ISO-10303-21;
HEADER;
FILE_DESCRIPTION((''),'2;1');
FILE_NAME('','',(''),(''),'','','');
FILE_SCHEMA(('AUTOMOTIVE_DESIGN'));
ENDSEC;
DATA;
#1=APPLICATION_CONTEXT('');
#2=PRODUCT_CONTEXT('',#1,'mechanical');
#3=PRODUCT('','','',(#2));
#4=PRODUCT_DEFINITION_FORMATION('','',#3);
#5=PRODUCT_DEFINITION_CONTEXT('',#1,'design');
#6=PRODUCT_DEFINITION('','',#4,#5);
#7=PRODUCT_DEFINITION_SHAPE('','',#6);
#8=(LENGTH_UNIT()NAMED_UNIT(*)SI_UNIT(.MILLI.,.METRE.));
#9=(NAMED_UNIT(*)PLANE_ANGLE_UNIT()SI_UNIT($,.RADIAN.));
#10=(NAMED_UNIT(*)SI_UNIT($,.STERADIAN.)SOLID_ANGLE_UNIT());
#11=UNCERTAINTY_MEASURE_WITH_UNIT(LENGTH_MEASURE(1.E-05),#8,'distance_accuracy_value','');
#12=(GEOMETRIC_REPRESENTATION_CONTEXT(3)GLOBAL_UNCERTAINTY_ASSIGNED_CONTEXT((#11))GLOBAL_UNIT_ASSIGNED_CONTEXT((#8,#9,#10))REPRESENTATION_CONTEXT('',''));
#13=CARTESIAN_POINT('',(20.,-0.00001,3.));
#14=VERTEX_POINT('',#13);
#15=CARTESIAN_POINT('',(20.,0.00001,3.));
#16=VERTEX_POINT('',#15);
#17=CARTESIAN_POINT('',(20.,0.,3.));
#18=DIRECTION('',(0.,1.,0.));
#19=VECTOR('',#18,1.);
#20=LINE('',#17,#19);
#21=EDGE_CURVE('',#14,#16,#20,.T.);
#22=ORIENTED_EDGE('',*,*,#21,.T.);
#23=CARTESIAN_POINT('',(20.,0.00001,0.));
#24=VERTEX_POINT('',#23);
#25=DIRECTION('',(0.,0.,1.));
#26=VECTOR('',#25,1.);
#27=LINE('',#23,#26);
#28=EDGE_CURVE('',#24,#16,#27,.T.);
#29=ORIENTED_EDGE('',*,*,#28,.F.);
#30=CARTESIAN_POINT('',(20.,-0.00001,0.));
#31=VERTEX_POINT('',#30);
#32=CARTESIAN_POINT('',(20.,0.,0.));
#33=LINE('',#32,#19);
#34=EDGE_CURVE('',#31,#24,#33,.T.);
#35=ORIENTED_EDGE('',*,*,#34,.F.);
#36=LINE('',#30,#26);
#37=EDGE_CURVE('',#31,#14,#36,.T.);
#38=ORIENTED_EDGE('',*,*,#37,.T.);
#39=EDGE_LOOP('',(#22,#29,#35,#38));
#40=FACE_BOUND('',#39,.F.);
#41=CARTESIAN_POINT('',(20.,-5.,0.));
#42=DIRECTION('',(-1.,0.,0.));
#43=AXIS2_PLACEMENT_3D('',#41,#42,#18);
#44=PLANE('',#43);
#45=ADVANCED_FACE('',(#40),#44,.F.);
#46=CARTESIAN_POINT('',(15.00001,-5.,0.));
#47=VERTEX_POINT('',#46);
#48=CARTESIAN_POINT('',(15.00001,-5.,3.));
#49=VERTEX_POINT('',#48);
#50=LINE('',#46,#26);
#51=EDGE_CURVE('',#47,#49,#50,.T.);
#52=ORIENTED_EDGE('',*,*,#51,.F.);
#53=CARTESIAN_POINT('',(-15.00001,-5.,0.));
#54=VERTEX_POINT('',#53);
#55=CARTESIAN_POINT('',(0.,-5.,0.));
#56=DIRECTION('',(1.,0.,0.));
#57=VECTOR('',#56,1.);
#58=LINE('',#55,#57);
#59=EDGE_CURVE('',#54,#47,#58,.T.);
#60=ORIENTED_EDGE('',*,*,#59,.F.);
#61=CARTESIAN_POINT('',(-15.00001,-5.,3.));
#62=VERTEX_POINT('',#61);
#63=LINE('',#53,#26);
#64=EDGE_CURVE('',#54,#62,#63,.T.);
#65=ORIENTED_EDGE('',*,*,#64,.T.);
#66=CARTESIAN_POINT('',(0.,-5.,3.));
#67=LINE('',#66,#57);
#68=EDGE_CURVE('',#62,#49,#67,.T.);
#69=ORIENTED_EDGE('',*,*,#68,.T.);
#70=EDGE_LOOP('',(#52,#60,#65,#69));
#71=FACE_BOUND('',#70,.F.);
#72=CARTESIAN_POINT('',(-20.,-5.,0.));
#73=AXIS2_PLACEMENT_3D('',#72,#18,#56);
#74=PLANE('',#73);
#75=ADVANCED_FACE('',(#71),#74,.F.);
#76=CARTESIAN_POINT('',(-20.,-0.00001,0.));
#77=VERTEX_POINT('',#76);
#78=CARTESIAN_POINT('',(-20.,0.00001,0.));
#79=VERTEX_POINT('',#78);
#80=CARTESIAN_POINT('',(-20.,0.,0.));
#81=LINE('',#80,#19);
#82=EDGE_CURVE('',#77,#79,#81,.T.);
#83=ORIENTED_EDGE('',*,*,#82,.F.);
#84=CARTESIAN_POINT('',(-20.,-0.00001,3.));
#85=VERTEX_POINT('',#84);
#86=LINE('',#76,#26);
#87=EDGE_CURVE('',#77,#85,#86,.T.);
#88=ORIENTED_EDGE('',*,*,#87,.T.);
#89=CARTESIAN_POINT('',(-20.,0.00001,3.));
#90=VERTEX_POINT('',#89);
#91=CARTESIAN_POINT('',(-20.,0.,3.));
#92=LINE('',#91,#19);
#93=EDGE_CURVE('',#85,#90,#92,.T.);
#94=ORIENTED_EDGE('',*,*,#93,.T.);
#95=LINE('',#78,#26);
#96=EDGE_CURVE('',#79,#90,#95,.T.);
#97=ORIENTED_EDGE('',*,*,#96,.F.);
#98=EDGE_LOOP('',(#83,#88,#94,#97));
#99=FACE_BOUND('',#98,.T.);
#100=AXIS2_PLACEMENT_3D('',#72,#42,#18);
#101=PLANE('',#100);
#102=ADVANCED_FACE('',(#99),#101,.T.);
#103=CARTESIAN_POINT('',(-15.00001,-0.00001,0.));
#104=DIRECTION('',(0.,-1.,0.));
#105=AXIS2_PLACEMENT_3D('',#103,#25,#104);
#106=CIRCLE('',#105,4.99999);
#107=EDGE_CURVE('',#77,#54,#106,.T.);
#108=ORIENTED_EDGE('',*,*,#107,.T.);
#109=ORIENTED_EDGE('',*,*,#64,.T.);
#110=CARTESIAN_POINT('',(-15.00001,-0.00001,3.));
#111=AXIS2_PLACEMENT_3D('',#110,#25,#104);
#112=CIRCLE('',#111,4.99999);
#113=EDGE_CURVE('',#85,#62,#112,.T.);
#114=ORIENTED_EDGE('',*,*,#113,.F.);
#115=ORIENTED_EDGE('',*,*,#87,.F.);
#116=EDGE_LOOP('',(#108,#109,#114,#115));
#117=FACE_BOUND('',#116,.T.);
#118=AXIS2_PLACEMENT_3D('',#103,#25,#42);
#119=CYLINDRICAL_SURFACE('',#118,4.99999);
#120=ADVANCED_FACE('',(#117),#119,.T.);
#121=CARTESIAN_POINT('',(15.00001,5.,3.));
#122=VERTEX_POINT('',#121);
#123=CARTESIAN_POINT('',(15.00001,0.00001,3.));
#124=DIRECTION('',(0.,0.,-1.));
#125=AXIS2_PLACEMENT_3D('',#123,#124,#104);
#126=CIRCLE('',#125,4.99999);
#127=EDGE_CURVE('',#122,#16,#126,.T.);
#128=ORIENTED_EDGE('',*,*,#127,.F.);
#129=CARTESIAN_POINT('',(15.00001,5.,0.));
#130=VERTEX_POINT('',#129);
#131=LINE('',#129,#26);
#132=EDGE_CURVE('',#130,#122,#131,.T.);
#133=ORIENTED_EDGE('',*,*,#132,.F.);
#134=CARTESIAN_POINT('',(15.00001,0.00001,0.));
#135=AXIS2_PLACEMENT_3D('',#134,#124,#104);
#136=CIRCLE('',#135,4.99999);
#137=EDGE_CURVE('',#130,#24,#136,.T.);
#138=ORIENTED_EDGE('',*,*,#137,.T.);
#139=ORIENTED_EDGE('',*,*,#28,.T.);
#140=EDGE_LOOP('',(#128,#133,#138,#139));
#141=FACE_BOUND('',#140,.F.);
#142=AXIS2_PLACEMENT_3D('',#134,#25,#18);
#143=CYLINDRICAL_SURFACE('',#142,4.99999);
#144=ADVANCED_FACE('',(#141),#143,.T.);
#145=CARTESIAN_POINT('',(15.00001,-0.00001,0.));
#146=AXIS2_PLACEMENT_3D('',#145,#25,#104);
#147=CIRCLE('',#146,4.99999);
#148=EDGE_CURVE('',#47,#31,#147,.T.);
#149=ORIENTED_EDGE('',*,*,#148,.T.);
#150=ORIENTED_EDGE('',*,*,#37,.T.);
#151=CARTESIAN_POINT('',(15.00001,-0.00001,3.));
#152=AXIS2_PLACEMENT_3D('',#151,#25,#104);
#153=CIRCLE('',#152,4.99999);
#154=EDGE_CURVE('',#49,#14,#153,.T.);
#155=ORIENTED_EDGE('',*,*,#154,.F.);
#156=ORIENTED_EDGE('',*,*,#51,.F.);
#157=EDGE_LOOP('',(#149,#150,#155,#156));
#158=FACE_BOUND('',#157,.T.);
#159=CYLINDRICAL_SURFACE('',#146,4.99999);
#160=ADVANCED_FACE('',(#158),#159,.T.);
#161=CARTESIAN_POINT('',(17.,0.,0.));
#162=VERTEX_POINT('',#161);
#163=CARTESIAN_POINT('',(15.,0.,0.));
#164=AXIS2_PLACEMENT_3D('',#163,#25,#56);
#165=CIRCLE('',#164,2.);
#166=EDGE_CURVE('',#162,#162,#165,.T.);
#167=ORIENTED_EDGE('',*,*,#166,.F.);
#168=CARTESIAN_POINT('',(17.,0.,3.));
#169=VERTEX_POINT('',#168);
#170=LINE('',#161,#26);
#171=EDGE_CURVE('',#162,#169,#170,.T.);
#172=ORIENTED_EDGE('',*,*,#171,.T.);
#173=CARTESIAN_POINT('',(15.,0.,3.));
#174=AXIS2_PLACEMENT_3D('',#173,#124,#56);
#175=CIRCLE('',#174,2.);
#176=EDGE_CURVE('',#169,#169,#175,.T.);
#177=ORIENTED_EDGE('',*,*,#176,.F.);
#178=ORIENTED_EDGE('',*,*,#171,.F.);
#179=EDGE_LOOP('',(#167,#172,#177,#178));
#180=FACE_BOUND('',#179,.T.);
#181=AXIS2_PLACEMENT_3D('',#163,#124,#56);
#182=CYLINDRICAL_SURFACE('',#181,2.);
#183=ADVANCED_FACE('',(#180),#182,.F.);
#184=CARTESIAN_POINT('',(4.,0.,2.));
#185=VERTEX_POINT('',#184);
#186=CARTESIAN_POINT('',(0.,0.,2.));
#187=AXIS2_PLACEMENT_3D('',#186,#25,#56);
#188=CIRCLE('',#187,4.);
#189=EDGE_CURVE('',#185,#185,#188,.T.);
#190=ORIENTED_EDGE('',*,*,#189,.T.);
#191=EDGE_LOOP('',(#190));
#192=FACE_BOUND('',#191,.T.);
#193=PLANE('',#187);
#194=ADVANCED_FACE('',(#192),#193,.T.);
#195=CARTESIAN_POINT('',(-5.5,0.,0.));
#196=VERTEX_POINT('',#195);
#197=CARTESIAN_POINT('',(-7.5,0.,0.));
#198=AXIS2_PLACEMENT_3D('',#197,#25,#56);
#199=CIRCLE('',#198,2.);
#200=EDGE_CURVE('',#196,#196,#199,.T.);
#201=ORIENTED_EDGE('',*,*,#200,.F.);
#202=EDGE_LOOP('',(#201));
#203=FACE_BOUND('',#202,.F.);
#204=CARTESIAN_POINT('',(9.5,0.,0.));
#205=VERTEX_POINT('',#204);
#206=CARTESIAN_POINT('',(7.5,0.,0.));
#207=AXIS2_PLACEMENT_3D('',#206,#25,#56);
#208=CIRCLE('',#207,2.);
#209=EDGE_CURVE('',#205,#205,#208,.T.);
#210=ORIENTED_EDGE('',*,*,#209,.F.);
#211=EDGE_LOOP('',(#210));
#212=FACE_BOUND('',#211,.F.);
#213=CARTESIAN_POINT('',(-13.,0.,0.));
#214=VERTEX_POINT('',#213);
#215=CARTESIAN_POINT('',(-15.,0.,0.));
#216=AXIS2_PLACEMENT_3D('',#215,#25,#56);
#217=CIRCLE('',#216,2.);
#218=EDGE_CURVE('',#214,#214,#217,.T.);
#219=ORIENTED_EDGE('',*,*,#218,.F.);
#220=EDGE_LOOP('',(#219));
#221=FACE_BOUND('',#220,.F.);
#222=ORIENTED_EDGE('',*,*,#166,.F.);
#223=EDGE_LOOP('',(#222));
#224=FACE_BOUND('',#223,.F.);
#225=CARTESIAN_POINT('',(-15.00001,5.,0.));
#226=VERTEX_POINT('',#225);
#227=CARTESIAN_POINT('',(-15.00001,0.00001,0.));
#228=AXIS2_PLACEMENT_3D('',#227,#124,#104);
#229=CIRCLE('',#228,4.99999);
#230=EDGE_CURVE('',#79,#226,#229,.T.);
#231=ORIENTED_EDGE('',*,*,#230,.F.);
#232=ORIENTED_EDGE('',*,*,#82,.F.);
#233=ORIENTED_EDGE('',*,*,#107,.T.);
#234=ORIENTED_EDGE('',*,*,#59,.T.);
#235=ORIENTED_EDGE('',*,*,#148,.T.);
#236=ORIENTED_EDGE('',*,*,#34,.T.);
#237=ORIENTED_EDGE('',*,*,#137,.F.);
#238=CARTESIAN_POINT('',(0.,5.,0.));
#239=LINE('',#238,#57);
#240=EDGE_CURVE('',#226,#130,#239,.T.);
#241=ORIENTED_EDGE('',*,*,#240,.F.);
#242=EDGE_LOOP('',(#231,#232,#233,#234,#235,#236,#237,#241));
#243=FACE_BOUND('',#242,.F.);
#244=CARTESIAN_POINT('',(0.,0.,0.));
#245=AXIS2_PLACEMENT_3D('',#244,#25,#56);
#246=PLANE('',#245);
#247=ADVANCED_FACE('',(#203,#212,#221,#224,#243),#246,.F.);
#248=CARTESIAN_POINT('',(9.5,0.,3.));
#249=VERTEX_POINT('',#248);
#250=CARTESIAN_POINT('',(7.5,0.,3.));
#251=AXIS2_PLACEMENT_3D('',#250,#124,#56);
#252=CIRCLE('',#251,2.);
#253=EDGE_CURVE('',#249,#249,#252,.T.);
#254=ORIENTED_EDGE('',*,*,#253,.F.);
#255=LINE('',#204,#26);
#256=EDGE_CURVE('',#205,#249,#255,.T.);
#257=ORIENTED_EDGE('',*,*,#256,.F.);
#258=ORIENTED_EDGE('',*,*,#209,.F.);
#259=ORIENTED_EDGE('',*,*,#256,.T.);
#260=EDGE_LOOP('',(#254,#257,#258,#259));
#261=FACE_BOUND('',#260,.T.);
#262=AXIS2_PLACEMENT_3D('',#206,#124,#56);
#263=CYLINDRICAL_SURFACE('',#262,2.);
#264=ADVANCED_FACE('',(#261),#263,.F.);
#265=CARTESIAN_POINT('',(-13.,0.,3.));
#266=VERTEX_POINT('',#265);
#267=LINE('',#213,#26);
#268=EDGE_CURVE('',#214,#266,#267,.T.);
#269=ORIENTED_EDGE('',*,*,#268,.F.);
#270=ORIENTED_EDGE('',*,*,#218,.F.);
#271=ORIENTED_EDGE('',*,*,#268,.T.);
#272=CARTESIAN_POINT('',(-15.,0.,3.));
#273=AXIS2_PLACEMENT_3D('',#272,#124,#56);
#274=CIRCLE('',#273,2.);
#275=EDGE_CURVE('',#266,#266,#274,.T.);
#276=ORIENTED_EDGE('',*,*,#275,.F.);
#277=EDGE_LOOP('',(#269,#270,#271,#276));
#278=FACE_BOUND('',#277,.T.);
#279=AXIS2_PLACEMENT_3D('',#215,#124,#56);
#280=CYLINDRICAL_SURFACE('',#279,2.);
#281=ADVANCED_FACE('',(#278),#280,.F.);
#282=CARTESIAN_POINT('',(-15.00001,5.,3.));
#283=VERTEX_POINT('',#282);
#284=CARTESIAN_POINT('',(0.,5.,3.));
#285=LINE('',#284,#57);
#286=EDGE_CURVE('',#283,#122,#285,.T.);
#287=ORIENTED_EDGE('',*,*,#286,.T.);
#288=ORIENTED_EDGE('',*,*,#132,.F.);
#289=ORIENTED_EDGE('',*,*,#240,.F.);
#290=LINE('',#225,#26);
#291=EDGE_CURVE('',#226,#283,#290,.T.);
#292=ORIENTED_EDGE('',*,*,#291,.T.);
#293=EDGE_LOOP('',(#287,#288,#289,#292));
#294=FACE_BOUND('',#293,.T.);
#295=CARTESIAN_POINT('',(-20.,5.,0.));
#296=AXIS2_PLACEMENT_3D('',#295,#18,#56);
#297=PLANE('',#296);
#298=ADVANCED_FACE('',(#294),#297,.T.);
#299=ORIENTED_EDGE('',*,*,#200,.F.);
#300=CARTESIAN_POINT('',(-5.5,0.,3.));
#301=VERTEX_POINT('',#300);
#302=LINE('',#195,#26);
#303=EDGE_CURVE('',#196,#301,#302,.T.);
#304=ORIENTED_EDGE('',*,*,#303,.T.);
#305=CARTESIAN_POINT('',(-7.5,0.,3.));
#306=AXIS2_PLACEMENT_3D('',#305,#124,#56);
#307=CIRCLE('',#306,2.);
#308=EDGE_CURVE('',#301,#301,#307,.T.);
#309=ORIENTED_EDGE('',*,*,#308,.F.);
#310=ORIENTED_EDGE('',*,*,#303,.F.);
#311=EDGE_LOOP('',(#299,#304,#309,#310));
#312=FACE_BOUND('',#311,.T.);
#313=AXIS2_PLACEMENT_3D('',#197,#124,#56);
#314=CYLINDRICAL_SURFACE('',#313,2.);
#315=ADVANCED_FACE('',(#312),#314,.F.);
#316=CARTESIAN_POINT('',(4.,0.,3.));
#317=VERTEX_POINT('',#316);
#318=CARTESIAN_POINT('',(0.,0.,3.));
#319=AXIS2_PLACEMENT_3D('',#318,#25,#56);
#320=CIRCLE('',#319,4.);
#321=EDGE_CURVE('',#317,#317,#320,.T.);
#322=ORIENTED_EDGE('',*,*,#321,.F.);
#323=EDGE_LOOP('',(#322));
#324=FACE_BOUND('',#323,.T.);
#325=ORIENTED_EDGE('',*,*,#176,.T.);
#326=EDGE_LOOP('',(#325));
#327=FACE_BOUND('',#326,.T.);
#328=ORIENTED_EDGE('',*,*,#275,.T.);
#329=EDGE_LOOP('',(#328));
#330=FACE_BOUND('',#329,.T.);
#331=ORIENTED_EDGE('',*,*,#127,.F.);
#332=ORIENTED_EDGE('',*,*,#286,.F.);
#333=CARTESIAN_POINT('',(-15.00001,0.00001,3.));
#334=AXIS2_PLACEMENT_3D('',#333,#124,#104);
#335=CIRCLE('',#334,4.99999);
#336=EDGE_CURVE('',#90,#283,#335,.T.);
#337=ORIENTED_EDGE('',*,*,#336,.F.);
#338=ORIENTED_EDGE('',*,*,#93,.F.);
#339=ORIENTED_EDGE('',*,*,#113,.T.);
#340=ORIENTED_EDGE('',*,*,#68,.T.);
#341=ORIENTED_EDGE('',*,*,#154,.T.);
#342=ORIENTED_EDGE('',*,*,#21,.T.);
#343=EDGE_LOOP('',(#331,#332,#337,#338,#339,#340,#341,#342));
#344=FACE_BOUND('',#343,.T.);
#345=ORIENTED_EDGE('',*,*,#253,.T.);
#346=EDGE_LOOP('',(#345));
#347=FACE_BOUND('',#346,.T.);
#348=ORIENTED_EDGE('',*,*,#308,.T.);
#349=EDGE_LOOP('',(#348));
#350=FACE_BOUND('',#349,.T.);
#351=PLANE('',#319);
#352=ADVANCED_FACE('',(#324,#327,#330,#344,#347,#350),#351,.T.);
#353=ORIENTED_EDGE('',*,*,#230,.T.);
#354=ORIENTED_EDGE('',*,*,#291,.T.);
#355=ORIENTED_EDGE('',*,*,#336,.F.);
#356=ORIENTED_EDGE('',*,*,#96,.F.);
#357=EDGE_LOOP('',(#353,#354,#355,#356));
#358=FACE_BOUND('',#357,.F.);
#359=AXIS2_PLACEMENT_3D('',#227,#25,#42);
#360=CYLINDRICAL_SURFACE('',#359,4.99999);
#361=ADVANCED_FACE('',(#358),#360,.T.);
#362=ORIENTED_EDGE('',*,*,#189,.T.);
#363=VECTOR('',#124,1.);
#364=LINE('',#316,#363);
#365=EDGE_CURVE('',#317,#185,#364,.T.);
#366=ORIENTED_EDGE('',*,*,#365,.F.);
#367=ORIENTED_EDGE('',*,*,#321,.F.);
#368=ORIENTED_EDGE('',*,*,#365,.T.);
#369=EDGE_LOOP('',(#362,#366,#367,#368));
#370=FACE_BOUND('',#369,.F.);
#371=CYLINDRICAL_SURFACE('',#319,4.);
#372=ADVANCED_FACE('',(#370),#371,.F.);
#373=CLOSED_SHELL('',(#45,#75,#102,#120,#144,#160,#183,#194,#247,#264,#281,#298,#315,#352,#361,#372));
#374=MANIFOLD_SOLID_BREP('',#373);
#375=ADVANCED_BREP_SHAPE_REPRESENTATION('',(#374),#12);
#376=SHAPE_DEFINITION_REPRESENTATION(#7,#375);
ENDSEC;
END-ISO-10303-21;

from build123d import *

# Parameters (mm, degrees)
F0_W     = 40
F0_H     = 10
F1_DEPTH = 3
F2_R     = 4
F3_DEPTH = 1
F4_R     = 2
F5_DEPTH = 25
F6_R     = 4.99999


# Not quite as in the source:
# - a fillet or chamfer is up to 0.001 mm smaller than in the source, because OpenCascade refuses the exact size


with BuildPart() as f1:
    # F0 (on Top) → F1 (new body)
    with BuildSketch(Plane.XY):
        Rectangle(F0_W, F0_H)
    extrude(amount=F1_DEPTH)

    # F2 (on face) → F3 (cut)
    with BuildSketch(Plane.XY.offset(3)):
        Circle(F2_R)
    extrude(amount=-F3_DEPTH, mode=Mode.SUBTRACT)

    # F4 (on Top) → F5 (cut)
    with BuildSketch(Plane.XY):
        with Locations((-7.5, 0)):
            Circle(F4_R)
        with Locations((7.5, 0)):
            Circle(F4_R)
        with Locations((-15, 0)):
            Circle(F4_R)
        with Locations((15, 0)):
            Circle(F4_R)
    extrude(amount=F5_DEPTH, mode=Mode.SUBTRACT)

    # F6 (radius 5 in the source; OpenCascade refuses exactly that, so slightly less here)
    f6_edges = [f1.edges().sort_by_distance(p)[0] for p in [
        (-20, -5, 1.5),
        (-20, 5, 1.5),
        (20, -5, 1.5),
        (20, 5, 1.5),
    ]]
    fillet(f6_edges, radius=F6_R)


solid = f1.part
